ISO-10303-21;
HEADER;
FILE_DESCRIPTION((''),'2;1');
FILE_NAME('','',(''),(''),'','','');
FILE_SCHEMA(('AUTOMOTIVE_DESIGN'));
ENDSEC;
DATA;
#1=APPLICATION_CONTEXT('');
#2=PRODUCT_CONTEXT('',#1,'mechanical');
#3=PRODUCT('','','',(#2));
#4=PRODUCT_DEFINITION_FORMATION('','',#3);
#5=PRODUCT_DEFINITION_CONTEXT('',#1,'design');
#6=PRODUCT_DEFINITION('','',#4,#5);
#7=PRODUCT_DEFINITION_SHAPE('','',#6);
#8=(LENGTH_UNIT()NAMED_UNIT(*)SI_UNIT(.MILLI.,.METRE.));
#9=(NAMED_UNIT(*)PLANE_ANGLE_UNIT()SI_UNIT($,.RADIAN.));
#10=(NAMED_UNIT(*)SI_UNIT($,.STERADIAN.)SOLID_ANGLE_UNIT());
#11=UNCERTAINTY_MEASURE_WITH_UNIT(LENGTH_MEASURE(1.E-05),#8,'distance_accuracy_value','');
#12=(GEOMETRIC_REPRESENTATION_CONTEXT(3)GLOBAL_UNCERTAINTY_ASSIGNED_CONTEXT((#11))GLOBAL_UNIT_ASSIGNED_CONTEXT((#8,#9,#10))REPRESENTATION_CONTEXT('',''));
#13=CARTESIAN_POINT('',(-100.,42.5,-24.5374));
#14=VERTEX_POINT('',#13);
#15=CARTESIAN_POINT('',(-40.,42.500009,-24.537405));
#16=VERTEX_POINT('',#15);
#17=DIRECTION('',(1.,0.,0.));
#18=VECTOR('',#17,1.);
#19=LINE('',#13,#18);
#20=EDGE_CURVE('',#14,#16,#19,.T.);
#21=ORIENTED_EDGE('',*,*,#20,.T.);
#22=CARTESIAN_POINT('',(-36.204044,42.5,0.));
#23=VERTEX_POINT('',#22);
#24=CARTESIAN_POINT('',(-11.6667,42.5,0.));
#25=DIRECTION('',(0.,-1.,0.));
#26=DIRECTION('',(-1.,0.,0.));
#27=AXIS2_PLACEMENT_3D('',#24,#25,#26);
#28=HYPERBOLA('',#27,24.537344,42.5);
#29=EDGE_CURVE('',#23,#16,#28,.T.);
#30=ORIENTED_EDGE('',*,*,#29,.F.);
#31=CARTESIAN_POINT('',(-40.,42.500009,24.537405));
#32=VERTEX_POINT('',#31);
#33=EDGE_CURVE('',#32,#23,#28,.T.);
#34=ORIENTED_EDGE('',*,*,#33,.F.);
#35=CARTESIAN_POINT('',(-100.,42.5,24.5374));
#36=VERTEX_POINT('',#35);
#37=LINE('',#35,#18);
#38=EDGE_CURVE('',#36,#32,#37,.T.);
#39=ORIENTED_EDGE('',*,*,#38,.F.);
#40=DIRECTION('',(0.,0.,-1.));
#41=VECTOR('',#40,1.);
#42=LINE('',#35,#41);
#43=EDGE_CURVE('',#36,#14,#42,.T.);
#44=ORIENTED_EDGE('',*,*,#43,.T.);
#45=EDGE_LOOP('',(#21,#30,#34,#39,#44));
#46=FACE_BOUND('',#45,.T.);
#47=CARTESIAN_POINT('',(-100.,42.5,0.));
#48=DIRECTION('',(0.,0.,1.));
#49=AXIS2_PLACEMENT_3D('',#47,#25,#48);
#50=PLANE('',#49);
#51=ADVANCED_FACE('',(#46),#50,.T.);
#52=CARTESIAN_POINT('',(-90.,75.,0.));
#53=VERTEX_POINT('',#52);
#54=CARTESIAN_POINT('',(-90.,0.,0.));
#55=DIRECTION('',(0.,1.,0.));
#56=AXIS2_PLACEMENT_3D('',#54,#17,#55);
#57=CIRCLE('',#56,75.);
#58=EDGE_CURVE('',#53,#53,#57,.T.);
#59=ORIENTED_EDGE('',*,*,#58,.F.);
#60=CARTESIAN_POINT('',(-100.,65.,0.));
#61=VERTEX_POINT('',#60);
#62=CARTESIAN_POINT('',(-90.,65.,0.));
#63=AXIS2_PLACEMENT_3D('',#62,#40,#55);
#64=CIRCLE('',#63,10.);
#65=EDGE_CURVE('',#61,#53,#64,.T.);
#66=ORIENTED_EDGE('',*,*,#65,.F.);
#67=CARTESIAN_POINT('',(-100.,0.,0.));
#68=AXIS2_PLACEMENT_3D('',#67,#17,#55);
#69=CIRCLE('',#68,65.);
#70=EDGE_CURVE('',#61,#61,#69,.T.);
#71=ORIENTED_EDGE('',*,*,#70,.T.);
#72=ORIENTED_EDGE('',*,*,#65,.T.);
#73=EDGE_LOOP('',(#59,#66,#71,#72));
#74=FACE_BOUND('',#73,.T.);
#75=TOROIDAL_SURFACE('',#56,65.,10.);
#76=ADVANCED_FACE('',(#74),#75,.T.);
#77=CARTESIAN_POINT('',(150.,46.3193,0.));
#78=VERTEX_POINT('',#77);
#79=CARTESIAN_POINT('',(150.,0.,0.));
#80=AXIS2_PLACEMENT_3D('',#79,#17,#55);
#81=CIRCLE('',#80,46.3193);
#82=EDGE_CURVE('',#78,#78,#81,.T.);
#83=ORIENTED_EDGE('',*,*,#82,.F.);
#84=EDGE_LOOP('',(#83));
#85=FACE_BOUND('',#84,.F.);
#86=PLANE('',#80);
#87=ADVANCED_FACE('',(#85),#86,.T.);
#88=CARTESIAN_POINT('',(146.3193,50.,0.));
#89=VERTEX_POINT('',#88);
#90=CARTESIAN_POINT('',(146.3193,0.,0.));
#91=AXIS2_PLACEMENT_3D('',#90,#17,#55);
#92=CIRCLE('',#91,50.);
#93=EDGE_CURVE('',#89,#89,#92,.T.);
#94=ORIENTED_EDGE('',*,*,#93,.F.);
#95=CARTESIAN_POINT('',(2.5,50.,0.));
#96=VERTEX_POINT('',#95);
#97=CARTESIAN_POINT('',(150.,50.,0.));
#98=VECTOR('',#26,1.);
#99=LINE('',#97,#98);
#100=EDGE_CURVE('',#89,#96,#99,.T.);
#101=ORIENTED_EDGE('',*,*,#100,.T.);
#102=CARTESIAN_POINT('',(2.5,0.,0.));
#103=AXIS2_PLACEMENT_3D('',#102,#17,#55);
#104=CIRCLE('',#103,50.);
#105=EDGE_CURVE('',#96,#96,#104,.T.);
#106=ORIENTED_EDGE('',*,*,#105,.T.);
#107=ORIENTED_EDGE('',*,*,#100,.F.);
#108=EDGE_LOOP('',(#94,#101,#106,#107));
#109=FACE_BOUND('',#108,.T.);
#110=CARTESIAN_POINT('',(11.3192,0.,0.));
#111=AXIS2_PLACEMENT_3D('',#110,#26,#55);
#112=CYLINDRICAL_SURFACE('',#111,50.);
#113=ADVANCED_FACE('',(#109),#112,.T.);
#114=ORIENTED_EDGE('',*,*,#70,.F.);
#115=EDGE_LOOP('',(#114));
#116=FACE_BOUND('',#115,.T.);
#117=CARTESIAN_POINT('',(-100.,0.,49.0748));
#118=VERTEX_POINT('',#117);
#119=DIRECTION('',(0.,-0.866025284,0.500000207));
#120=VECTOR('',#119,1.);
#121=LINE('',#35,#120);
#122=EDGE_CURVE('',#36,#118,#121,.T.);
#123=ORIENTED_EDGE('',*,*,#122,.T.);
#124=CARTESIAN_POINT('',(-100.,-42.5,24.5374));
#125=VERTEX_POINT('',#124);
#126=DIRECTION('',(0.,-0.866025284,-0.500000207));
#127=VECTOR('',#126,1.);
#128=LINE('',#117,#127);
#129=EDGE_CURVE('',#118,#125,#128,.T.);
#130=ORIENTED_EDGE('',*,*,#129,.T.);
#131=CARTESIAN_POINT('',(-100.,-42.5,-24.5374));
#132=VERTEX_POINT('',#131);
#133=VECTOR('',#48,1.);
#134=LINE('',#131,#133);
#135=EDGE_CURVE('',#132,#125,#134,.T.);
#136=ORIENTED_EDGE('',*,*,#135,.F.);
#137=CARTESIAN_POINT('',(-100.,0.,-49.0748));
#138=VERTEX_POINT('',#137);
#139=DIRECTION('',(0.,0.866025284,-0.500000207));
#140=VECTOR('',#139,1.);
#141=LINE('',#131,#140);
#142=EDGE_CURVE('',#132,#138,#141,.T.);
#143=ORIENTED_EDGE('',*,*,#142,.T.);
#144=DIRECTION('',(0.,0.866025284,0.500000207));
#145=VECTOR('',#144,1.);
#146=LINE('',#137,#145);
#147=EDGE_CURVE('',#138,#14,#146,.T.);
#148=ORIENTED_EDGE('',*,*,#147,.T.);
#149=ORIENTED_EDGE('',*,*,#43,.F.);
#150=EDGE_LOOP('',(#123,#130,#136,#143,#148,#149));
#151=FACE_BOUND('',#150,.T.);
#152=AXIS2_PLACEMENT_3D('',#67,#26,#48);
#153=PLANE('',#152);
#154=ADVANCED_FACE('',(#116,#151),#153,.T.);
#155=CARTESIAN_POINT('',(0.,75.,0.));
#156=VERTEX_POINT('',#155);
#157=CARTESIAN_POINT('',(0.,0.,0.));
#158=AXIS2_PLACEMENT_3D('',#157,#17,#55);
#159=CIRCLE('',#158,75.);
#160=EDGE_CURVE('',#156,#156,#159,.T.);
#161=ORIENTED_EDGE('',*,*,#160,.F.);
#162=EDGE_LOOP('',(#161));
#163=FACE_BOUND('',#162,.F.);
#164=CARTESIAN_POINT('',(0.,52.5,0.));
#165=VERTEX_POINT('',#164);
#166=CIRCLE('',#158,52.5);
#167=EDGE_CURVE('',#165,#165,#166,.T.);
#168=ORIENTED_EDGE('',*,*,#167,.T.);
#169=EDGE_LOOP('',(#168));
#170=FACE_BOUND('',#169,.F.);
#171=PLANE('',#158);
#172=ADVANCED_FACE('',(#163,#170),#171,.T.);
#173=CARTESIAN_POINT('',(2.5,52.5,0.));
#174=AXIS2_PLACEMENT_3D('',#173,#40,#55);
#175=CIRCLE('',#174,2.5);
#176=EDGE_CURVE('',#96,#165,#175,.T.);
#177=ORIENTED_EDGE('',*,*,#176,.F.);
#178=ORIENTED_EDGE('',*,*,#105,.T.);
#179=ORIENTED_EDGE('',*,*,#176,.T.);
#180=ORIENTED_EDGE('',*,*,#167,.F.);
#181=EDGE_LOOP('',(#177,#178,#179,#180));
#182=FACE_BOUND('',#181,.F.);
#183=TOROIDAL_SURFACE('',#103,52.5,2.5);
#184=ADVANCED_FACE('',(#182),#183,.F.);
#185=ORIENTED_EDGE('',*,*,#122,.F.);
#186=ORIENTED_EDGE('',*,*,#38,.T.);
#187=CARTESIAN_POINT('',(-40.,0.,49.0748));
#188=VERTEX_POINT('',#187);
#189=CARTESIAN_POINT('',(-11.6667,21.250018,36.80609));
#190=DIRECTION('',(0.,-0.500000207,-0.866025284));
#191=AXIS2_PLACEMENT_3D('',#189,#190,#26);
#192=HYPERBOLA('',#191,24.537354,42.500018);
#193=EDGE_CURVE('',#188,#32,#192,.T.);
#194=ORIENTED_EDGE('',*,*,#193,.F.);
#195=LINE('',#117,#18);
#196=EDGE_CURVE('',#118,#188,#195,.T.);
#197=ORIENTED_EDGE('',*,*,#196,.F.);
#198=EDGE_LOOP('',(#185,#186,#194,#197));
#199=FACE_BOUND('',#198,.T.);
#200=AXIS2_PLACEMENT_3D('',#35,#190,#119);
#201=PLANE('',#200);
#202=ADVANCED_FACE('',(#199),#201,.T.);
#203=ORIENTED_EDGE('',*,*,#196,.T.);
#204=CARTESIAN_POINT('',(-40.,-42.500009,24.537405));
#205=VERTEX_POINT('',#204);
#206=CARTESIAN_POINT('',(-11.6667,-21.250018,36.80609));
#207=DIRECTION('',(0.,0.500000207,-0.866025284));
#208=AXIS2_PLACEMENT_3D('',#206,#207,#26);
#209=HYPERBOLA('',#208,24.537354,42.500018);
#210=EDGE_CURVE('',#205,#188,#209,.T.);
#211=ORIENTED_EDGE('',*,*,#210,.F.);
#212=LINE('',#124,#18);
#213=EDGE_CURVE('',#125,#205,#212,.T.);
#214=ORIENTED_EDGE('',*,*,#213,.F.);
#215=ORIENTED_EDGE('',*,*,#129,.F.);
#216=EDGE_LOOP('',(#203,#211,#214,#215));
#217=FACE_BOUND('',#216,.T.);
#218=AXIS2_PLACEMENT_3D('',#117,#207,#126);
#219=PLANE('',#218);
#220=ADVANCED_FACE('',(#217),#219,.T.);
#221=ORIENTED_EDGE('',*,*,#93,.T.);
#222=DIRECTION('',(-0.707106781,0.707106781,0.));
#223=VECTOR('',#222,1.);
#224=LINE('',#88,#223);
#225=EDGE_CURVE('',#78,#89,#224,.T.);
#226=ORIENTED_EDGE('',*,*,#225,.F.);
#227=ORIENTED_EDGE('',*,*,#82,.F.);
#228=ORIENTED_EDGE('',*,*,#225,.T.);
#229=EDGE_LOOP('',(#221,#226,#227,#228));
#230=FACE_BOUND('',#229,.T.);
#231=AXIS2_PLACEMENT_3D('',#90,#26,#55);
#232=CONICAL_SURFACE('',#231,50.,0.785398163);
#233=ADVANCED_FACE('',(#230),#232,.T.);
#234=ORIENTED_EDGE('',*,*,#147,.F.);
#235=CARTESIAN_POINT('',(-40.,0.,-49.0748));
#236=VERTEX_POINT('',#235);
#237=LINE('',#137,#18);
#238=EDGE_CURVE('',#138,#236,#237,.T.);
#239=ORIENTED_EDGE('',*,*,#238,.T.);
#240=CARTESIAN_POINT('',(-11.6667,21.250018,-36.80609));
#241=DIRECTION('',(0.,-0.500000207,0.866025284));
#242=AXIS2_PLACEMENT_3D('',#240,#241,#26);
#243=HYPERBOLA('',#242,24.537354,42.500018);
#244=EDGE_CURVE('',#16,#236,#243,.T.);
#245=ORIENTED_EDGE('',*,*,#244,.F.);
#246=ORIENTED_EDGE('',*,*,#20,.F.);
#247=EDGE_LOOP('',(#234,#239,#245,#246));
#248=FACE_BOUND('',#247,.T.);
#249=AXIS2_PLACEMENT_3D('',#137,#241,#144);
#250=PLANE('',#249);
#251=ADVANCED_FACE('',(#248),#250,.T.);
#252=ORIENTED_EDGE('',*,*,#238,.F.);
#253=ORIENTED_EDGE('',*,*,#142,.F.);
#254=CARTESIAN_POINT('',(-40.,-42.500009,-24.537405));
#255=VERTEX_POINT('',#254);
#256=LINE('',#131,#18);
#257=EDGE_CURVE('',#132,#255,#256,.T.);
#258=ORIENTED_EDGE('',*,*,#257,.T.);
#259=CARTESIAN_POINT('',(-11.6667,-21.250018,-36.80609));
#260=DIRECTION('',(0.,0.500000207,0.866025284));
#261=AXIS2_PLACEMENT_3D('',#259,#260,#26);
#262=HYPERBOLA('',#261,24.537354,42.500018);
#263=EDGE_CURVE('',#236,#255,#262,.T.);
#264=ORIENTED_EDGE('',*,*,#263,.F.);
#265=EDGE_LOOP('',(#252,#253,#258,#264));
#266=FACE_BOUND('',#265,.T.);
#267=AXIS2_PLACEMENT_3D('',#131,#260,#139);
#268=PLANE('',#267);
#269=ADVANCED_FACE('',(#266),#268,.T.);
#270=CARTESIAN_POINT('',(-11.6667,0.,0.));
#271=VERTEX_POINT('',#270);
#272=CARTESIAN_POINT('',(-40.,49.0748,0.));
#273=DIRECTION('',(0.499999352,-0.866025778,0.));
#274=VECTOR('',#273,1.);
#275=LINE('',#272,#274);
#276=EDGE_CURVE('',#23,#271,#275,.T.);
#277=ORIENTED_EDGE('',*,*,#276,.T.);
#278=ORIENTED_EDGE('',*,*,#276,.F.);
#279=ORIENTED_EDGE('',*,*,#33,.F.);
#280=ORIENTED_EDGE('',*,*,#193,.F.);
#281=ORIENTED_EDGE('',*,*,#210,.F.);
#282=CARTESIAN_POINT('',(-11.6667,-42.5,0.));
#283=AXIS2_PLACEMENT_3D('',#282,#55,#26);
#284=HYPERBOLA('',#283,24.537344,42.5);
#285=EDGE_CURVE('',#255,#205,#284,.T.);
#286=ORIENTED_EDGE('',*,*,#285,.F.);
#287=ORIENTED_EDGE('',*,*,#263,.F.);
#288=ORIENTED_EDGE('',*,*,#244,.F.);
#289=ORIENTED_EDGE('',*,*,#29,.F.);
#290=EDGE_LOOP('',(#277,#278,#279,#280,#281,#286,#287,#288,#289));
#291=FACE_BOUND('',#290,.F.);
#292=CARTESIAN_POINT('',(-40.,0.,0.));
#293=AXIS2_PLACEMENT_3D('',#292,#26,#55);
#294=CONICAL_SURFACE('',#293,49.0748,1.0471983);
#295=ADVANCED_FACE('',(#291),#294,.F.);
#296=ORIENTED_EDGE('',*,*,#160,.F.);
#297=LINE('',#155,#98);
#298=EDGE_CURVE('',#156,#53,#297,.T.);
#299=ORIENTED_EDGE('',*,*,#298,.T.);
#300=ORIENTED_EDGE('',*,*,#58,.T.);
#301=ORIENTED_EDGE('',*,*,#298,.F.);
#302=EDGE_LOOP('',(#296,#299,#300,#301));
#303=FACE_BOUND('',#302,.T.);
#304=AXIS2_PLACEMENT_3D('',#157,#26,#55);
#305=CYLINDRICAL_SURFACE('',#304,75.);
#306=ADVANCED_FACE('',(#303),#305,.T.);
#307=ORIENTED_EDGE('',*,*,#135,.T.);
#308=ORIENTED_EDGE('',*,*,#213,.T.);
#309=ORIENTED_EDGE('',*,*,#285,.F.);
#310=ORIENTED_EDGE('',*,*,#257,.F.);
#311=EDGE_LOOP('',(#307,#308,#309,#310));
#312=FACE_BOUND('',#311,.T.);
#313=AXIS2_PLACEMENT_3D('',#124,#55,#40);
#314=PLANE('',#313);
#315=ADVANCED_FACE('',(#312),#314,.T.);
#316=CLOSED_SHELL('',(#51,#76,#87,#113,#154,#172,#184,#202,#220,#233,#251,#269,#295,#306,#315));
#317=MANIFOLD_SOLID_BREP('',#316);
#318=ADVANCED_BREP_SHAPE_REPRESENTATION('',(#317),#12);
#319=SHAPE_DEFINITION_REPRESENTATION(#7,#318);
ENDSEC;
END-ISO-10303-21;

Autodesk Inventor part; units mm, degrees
ref_plane "YZ Plane" through (0, 0, 0) normal (1, 0, 0) x (0, 1, 0)
ref_plane "XZ Plane" through (0, 0, 0) normal (0, 1, 0) x (-1, 0, 0)
sketch "Skizze1" plane through (0, 0, 0) normal (0, 0, 1) x (1, 0, 0)
  line L0 (-11.6667, 0) -> (150, 0)
  line L1 (150, 0) -> (150, 50)
  line L2 (150, 50) -> (15, 50)
  line L3 (15, 50) -> (11.3192, 50)
  line L4 (11.3192, 50) -> (0, 50)
  line L5 (0, 50) -> (0, 75)
  line L6 (0, 75) -> (-100, 75)
  line L7 (-100, 75) -> (-100, 49.0748)
  line L8 (-100, 49.0748) -> (-40, 49.0748)
  line L9 (-40, 49.0748) -> (-11.6667, 0)
  line L10 (-150, 0) -> (200, 0) projected
  line L11 (0, -15) -> (0, 90) projected
  line L12 (15, 50) -> (0, 50) construction
  dimension "d1" = 135
  dimension "d2" = 3.6808
  dimension "d3" = 100
  dimension "d4" = 60
  dimension "d5" = 60
  dimension "d6" = 100
  dimension "d7" = 100
  dimension "d8" = 98.1496
  dimension "d9" = 150
  dimension "d26" = 150
revolve "Körper" add sketch "Skizze1" angle 360 about axis through (-11.6667, 0, 0) along (1, 0, 0)
sketch "Skizze2" plane through (-100, 0, 0) normal (-1, 0, 0) x (0, 0, 1)
  circle A0 centre (0, 0) radius 49.0748 projected
  line L0 (0, -105) -> (0, 105) projected
  line L1 (-105, 0) -> (105, 0) projected
  line L2 (49.0748, 0) -> (24.5374, -42.5)
  line L3 (24.5374, -42.5) -> (-24.5374, -42.5)
  line L4 (-24.5374, -42.5) -> (-49.0748, 0)
  line L5 (-49.0748, 0) -> (-24.5374, 42.5)
  line L6 (-24.5374, 42.5) -> (24.5374, 42.5)
  line L7 (24.5374, 42.5) -> (49.0748, 0)
extrude "Loch" add sketch "Skizze2" against normal up to next contours L7 A0 | A0 L2 | L6 L0 A0 | A0 L0 L3 | L0 L6 A0 | A0 L3 L0 | L4 A0 | A0 L5
fillet "Rundung1" radius 10 1 edges at (-100, -75, 0)
thread "Gewinde" size "M100x6" class "6g" standard "ISO Metric profile" length 135
chamfer "Fase1" distance 3.6807 distance2 3.6807 1 edges at (150, -50, 0) measured on face at (150, -3.2515, 16.3464)
ref_plane "Work Plane1" through (29, 0, 0) normal (0, -1, 0) x (1, 0, 0)
fillet "Fillet2" radius 2.5 1 edges at (0, -50, 0)
equation "\"d1\" = GEL"
equation "\"d3\" = KOH"
equation "\"d4\" = INTI"
equation "\"d6\" = GD"
equation "\"d7\" = BDM"
equation "\"d8\" = 1.1547 * SW"
equation "\"d9\" = KOD"
equation "\"d26\" = NLG"
equation "\"d30\" = R"
equation "\"d17\" = RR"
equation "\"d13\" = GEL"
equation "\"d15\" = -0.5 * SPD + 0.5 * GD"
equation "\"d16\" = GUL"
equation "\"GD\" = NND"
equation "\"NLG\" = 150"
equation "\"GEL\" = 135"
equation "\"KOD\" = 150"
equation "\"KOH\" = 100"
equation "\"INTI\" = 60"
equation "\"GAL\" = 0.61345 * PTC"
equation "\"GUL\" = 0.61345 * PTC"
equation "\"BDM\" = NND"
equation "\"SW\" = 85"
equation "\"SPD\" = NND - 1.2269 * PTC"
equation "\"R\" = 2.5"
equation "\"TOA\" = 30deg"
equation "\"GD1\" = THREADDIA - 1.2269 * PTC"
equation "\"FAWI\" = 45deg"
equation "\"ANG\" = 120deg"
equation "\"PTC\" = 6"
equation "\"E0\" = 1.155 * SW"
equation "\"RR\" = 10"
equation "\"NND\" = 100"
equation "\"THREADDIA\" = 100"
properties part number "DIN 912 - M100 x 6 x 150" material "Stahl, weich"
